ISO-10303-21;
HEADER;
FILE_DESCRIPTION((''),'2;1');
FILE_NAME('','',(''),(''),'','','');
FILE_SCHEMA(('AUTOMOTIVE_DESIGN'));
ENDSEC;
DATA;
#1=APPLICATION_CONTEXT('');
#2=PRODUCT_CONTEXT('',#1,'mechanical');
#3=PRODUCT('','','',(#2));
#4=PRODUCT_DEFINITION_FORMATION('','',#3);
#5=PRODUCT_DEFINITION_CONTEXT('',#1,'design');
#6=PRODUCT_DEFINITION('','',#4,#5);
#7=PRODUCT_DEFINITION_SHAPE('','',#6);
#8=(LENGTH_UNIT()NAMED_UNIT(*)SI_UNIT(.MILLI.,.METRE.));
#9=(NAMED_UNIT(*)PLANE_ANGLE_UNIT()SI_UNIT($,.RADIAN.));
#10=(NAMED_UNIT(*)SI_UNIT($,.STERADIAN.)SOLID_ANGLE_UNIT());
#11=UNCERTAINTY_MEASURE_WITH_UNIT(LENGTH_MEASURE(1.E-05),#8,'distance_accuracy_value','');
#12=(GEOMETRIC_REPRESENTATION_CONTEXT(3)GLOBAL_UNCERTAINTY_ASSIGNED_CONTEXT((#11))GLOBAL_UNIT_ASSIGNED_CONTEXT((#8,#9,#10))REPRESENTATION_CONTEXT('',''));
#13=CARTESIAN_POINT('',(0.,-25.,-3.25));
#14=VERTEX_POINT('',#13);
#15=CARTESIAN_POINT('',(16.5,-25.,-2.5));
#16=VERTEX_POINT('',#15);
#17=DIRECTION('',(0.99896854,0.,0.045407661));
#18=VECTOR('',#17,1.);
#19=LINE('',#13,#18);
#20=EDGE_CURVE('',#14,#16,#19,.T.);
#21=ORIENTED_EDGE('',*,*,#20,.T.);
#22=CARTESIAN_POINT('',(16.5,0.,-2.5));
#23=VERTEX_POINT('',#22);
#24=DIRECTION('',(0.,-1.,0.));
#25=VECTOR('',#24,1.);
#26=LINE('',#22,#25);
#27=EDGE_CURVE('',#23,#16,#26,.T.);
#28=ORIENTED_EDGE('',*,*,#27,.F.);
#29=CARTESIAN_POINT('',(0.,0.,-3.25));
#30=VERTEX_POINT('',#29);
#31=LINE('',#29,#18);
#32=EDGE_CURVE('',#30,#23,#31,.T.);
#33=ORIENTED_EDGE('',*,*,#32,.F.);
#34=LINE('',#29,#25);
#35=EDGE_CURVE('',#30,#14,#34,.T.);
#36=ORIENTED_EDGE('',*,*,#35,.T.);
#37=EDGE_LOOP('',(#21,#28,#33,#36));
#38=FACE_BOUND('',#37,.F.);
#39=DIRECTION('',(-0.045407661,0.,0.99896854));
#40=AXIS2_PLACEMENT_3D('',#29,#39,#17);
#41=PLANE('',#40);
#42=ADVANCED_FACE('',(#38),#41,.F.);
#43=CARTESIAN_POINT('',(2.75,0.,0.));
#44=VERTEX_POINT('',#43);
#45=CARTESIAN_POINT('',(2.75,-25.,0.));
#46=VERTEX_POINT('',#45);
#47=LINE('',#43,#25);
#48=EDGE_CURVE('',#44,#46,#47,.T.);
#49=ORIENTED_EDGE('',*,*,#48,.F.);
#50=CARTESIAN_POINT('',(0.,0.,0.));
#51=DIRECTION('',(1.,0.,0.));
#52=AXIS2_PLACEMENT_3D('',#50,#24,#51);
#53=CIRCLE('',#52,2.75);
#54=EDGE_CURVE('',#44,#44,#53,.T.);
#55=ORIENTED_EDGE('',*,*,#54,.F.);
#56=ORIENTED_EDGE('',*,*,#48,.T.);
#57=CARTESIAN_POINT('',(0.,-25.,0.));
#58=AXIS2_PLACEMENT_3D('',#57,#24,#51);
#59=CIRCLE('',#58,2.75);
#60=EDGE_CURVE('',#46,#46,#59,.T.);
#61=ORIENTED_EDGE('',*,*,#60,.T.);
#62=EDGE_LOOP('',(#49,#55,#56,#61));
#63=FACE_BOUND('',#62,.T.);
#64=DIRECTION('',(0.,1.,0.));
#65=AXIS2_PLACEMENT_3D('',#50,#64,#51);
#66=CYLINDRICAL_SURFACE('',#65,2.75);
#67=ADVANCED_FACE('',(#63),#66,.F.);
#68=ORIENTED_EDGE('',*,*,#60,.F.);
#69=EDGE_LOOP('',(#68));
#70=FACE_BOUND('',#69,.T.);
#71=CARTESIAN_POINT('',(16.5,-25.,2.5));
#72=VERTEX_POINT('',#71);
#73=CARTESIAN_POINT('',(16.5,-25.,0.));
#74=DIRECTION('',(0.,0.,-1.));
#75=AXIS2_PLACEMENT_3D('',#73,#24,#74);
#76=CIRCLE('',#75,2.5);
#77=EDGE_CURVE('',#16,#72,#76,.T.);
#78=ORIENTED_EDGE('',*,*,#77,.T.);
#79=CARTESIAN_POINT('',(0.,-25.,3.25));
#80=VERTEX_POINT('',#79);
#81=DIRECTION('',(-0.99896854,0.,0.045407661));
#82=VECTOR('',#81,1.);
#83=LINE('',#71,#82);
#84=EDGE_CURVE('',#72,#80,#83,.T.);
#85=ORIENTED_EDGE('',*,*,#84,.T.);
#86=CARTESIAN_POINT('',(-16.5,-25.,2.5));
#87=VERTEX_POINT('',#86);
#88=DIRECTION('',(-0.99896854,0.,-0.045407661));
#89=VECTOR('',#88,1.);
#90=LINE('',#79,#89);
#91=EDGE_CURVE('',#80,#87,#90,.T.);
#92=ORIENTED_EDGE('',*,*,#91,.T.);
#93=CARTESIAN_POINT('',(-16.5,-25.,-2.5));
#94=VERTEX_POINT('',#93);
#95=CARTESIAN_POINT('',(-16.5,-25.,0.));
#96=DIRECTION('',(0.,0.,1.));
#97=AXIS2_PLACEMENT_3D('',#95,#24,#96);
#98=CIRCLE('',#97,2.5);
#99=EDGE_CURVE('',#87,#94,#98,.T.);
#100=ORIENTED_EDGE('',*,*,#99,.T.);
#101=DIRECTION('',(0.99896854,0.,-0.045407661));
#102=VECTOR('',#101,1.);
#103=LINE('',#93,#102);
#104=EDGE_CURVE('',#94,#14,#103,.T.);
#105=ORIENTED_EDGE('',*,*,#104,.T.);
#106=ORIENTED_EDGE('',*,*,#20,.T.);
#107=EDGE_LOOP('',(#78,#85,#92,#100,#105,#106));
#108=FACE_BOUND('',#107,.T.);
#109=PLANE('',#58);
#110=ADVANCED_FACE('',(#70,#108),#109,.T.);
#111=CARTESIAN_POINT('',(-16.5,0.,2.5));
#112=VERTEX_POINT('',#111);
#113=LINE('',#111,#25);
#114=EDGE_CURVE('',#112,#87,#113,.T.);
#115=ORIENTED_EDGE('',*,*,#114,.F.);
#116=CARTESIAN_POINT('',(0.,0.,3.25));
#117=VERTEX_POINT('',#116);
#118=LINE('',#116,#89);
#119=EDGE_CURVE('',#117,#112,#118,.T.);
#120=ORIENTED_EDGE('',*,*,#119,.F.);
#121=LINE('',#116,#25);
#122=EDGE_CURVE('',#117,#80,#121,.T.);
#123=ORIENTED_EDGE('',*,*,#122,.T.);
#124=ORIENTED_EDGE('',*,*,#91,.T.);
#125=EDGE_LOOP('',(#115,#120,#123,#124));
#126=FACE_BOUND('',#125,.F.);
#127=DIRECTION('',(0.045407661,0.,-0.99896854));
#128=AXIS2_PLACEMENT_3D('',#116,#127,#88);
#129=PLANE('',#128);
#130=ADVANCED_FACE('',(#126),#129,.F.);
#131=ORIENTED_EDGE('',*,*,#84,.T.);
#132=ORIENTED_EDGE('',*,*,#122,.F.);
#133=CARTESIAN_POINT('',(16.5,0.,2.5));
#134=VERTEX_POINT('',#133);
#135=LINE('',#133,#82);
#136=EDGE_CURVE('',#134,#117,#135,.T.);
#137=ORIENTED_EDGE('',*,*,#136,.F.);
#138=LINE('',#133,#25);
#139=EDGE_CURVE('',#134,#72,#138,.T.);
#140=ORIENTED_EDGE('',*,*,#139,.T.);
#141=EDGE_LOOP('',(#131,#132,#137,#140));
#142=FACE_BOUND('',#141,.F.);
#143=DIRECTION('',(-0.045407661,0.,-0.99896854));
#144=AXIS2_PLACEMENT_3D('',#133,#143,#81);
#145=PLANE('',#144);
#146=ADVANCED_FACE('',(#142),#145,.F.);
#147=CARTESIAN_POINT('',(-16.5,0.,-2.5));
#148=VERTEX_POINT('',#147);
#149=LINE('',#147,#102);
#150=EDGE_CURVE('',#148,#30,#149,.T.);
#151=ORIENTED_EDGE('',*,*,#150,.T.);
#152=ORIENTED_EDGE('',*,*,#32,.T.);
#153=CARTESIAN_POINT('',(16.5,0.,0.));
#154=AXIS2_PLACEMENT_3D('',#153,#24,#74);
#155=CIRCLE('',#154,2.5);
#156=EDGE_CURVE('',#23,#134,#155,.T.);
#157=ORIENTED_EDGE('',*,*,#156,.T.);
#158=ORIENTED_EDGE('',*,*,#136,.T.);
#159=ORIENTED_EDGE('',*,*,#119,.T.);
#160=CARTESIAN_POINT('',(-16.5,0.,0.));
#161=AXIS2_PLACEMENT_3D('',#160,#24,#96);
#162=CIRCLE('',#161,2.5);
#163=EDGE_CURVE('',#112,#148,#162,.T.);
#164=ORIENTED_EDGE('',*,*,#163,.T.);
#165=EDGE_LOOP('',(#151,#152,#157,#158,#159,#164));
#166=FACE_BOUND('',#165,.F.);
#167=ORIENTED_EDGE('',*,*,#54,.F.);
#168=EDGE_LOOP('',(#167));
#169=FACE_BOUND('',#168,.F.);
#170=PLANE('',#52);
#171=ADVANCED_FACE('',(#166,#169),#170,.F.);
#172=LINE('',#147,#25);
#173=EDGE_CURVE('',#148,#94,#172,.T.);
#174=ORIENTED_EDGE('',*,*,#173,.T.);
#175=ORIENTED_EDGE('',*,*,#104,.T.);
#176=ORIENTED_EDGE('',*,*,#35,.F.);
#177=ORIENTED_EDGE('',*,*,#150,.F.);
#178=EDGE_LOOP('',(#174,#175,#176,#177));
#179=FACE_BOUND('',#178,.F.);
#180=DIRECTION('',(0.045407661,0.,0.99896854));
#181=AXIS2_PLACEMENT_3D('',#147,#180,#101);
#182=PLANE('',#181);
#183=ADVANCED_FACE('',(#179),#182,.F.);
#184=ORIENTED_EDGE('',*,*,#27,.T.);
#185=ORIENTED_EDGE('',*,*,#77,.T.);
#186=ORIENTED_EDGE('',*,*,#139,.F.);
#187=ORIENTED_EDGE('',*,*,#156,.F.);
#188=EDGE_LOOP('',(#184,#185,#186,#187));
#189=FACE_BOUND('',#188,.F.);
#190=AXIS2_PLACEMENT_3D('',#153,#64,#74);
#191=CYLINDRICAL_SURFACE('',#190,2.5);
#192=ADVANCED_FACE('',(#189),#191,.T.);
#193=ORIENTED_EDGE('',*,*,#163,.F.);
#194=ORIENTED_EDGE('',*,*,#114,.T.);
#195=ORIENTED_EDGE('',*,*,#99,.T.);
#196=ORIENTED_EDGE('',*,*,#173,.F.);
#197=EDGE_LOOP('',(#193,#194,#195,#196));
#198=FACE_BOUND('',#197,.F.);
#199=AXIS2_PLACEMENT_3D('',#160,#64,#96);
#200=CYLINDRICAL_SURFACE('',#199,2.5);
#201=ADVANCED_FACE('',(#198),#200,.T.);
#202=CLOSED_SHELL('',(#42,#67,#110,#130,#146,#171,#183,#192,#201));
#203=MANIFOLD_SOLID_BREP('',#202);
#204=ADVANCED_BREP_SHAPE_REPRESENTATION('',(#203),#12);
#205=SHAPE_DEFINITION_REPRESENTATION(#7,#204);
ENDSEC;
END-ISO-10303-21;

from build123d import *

# Parameters (mm, degrees)
F0_R     = 2.75
F1_DEPTH = 25


# Not quite as in the source:
# - a feature of the source that left no trace in its solid (it failed there, or was rolled back) is left out


with BuildPart() as f1:
    # F0 (on Front) → F1 (new body)
    with BuildSketch(Plane.XZ):
        Polygon((0, 3.25), (-16.5, 2.5), (-16.5, -2.5), (0, -3.25), (16.5, -2.5), (16.5, 2.5), align=None)
        Circle(F0_R, mode=Mode.SUBTRACT)
        with BuildLine():
            Line((-16.5, -2.5), (-16.5, 2.5))
            ThreePointArc((-16.5, 2.5), (-19, 0), (-16.5, -2.5))
        make_face()
        with BuildLine():
            ThreePointArc((16.5, -2.5), (19, 0), (16.5, 2.5))
            Line((16.5, 2.5), (16.5, -2.5))
        make_face()
    extrude(amount=F1_DEPTH)


solid = f1.part
